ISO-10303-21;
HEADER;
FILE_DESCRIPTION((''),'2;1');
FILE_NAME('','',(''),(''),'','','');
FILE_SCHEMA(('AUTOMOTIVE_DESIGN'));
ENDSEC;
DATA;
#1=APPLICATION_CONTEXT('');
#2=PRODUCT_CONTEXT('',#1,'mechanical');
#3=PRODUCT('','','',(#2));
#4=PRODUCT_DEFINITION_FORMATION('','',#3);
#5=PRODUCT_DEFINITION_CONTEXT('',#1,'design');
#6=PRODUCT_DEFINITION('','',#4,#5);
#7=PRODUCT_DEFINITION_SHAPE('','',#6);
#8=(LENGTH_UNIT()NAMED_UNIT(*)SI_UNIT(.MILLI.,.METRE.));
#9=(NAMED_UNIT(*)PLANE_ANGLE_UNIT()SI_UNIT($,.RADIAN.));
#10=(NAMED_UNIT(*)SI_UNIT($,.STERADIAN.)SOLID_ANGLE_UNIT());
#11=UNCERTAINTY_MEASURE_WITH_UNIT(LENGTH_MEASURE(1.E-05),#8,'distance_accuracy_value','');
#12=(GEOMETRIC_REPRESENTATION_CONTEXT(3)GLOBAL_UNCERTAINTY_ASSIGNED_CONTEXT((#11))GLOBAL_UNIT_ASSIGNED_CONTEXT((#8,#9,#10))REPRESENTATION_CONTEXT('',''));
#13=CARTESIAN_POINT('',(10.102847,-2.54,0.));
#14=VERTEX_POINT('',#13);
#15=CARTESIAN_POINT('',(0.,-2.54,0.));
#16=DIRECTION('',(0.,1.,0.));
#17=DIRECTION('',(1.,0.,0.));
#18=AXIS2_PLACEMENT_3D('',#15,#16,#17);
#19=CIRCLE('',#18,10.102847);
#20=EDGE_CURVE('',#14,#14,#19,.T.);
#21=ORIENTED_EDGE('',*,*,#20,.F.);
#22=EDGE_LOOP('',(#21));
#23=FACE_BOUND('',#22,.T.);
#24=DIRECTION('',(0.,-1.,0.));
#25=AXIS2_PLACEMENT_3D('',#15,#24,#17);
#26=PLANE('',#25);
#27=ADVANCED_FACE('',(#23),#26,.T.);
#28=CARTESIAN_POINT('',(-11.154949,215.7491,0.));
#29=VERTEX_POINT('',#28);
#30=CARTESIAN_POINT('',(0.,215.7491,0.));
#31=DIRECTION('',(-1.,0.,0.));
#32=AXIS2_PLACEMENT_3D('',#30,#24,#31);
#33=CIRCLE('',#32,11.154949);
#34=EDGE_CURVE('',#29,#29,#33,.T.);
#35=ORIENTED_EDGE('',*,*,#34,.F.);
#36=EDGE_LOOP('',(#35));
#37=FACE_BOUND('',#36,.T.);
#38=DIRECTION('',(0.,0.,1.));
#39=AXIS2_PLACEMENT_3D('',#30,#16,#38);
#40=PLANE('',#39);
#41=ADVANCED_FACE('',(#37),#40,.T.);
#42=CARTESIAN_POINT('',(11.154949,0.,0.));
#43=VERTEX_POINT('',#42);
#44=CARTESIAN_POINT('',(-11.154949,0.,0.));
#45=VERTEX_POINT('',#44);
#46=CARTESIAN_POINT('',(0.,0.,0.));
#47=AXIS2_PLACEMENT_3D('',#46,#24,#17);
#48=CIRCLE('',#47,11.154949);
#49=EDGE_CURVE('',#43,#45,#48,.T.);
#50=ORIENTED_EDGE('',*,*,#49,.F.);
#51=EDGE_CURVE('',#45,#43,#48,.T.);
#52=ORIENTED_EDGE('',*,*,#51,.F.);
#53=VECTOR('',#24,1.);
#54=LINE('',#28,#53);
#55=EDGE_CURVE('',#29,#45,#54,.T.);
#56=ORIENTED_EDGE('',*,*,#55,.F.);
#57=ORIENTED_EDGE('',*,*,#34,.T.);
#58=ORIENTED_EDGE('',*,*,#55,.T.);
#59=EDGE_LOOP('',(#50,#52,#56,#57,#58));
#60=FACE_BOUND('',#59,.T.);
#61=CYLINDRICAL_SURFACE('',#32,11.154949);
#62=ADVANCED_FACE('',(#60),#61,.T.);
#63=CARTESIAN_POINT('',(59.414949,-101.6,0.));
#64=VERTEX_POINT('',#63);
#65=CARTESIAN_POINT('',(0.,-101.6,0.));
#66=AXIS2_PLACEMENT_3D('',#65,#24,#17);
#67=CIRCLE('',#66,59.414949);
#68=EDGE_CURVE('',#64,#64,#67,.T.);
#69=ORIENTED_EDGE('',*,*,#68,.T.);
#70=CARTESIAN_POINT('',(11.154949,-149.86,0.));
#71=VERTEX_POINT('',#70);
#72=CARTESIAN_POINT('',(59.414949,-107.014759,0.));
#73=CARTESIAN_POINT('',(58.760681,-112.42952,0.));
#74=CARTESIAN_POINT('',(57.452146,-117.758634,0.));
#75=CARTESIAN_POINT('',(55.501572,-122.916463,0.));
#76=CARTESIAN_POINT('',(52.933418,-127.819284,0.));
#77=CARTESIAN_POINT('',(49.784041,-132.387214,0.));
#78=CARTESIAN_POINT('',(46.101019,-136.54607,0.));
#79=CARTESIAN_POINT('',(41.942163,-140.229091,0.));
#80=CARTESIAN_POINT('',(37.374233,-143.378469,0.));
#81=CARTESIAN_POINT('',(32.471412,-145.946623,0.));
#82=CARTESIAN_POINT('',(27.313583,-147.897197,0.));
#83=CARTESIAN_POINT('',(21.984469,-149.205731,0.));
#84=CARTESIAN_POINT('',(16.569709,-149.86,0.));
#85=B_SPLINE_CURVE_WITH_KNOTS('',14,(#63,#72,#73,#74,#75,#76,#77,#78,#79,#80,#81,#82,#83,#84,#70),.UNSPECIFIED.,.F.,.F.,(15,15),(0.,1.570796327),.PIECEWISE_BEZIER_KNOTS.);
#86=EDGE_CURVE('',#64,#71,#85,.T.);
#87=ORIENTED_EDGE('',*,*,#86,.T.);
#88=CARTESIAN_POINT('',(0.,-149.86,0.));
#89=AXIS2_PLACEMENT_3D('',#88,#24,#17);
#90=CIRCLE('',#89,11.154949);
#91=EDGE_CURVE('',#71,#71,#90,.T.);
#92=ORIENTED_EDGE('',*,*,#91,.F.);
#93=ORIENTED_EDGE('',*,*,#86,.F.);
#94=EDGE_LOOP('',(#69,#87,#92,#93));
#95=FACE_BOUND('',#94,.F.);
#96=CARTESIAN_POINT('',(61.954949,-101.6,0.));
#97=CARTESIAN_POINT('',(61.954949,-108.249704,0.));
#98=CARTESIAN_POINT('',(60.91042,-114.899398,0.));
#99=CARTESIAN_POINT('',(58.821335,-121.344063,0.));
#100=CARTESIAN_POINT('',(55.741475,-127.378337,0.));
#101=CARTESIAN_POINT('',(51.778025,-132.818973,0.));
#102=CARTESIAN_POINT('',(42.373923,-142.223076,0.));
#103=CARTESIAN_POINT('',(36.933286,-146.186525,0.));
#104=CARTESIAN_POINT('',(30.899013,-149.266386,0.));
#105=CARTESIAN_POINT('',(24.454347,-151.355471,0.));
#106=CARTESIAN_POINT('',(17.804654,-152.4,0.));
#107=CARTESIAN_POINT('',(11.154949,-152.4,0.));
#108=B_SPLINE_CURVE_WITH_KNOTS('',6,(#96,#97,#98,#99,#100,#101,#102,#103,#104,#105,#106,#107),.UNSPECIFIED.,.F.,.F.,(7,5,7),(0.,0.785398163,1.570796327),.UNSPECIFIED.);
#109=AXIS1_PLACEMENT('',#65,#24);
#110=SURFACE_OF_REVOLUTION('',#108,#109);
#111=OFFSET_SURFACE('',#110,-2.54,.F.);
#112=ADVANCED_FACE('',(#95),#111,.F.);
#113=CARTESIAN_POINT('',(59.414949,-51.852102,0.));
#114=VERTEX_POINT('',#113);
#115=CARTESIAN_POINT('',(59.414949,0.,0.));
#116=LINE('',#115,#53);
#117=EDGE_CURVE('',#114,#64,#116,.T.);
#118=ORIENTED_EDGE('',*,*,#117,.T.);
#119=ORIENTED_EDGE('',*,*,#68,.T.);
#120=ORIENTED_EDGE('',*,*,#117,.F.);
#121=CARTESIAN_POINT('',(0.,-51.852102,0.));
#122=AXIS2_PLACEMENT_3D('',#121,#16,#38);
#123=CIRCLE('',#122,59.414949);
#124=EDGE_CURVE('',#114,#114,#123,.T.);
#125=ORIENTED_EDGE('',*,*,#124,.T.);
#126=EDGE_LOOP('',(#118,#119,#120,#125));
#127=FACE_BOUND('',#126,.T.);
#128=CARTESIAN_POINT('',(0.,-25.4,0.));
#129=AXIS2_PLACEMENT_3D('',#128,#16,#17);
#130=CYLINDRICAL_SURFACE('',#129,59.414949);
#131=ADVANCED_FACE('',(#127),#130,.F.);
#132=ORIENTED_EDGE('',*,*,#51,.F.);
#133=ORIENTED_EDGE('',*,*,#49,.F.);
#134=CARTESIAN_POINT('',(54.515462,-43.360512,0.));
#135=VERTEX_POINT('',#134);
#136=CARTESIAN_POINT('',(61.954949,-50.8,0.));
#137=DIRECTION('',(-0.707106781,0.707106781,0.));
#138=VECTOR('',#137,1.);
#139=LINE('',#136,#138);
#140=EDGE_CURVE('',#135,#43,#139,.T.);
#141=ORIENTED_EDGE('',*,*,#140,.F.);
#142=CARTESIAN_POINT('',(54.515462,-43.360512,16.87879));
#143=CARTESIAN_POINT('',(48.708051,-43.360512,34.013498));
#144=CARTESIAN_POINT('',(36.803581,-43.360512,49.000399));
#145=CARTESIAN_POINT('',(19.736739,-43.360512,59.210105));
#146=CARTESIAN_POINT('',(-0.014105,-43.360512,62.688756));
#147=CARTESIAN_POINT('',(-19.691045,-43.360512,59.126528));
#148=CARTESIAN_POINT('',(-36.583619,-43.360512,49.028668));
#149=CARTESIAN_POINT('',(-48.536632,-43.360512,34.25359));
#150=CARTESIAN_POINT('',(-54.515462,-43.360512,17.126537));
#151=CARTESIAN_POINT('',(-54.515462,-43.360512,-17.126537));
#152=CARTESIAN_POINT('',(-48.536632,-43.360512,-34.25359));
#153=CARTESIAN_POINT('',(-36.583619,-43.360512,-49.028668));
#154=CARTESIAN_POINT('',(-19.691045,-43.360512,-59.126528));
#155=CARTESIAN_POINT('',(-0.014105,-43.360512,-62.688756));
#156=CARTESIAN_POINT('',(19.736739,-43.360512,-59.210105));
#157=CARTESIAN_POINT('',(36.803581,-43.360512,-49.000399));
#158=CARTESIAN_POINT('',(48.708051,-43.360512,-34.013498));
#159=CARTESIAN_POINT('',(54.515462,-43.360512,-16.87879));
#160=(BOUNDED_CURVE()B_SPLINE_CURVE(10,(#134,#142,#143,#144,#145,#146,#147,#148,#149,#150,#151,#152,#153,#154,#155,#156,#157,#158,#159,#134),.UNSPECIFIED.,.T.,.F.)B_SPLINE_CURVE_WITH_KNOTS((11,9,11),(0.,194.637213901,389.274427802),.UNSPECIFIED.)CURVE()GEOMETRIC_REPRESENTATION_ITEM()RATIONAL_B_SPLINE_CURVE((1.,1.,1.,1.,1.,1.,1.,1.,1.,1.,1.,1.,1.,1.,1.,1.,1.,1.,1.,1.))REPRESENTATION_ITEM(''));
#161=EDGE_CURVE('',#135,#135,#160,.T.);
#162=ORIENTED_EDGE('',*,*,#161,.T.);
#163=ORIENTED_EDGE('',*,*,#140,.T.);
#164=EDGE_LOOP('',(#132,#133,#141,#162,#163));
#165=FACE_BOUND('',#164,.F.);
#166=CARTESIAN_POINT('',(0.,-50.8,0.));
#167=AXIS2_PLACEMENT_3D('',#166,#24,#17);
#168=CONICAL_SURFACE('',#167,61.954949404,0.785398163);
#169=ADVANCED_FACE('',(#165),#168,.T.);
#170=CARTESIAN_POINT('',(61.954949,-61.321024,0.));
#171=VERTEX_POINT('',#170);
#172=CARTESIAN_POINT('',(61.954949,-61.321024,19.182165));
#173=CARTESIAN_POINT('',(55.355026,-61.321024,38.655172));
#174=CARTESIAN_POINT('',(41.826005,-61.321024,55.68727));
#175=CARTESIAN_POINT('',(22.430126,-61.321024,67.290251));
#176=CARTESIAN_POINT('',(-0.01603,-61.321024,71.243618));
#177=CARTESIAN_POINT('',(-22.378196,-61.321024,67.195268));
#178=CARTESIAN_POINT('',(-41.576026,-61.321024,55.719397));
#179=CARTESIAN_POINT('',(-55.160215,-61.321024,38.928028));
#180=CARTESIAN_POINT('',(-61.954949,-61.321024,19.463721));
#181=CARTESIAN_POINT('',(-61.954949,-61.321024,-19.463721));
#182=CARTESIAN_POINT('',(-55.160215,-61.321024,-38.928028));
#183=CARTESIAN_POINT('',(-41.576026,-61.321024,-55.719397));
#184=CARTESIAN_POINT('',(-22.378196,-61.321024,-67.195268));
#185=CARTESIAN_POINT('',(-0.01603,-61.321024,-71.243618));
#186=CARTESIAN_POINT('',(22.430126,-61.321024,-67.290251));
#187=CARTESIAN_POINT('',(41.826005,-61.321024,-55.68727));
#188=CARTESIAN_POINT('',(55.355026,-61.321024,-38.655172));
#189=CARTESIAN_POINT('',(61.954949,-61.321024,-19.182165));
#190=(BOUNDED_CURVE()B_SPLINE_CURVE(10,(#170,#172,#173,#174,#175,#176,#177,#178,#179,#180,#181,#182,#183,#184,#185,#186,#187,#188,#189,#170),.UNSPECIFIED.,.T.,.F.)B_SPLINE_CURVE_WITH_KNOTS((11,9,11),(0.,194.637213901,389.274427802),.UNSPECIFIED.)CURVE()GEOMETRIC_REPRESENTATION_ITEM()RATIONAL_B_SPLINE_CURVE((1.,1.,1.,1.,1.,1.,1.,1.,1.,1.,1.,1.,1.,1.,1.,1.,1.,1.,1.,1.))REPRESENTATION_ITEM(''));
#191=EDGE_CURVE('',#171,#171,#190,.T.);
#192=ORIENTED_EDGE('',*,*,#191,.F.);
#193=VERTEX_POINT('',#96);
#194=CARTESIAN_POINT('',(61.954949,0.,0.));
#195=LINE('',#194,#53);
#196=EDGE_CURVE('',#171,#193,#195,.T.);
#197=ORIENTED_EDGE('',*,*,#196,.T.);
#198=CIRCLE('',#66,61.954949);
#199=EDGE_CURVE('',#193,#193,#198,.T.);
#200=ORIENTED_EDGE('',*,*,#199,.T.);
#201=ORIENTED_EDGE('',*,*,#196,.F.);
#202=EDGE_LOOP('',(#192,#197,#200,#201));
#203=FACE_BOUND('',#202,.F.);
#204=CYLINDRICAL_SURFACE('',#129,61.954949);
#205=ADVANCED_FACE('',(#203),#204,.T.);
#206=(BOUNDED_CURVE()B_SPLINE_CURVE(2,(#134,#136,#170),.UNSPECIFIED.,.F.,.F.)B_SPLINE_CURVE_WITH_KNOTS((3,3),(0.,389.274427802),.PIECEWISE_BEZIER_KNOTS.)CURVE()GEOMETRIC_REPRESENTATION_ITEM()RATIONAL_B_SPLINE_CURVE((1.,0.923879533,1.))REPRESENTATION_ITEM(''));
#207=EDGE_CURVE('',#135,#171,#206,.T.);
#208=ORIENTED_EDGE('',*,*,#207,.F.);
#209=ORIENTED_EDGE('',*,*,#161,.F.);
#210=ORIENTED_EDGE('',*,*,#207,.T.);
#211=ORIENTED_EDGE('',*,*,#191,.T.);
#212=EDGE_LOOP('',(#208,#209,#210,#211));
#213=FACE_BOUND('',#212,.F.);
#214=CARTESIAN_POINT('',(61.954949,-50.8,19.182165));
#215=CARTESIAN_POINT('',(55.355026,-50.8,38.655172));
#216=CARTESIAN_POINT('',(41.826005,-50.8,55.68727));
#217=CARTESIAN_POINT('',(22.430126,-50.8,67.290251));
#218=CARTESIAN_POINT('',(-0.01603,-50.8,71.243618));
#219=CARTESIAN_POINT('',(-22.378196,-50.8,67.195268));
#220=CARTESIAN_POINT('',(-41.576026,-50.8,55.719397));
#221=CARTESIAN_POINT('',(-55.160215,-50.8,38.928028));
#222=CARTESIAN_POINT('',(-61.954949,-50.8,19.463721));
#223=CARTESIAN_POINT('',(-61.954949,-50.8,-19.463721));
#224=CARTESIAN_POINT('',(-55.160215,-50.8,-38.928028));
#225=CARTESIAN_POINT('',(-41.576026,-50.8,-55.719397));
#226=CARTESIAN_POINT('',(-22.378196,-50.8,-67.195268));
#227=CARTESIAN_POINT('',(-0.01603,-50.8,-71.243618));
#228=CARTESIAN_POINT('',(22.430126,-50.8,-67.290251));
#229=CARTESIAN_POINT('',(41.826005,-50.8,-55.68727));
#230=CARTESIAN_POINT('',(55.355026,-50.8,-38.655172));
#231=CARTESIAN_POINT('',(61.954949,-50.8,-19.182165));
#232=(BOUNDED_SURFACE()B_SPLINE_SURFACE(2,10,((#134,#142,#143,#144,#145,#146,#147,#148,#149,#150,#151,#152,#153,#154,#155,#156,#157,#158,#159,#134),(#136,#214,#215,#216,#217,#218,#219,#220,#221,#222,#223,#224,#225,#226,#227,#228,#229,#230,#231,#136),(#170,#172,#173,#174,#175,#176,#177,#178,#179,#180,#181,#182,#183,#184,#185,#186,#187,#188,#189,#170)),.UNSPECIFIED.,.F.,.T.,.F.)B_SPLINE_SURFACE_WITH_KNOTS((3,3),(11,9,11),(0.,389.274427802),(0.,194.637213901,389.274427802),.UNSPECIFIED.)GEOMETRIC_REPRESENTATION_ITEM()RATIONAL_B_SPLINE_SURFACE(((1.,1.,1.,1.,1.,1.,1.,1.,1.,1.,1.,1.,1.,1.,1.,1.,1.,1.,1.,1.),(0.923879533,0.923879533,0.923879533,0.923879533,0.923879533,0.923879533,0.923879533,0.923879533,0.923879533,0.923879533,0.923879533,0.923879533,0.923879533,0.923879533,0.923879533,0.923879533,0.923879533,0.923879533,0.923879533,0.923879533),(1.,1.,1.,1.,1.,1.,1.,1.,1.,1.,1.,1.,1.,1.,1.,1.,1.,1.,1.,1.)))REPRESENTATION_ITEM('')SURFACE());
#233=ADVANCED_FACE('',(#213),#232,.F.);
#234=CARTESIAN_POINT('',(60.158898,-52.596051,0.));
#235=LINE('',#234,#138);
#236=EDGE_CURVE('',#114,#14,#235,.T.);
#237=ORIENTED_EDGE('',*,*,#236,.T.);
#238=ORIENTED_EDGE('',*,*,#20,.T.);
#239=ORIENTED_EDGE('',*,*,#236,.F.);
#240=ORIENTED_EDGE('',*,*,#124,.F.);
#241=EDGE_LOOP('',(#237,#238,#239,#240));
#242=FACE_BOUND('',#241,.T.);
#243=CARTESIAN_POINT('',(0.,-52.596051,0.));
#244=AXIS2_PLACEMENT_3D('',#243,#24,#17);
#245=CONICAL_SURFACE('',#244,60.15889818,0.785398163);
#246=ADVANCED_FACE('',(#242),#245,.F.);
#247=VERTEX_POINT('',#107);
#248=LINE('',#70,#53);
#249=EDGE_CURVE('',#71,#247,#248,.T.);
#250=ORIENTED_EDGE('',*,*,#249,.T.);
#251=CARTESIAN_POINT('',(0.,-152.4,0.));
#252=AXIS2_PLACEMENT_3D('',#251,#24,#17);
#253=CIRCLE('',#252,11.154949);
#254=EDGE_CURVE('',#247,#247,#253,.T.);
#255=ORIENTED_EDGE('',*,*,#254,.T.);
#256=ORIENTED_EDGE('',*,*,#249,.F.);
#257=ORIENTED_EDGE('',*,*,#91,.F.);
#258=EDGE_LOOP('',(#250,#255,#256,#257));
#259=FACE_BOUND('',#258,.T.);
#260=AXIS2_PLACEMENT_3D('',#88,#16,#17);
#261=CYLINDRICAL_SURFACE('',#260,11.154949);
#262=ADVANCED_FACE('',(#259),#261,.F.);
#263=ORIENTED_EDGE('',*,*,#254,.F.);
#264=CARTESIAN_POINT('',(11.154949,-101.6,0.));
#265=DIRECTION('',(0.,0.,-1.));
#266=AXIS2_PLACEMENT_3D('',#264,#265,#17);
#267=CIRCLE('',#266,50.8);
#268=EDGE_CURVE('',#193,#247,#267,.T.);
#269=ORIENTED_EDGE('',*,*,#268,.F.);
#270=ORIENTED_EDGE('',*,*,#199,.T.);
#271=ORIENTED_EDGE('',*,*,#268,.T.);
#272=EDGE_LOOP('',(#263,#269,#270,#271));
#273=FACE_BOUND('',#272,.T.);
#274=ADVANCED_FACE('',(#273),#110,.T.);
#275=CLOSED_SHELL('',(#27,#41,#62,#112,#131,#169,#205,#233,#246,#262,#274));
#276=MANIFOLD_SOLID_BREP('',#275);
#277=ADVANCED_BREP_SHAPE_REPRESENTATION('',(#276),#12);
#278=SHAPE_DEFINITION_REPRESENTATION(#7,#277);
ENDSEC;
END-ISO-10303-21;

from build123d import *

# Parameters (mm, degrees)
F0_R     = 61.9549494039
F1_DEPTH = 25.4
F2_DEPTH = 127
F3_R     = 50.8
F4_SIZE  = 50.8
F5_T     = -2.54
F6_R     = 11.1549494039
F9_R     = 25.4


# Not quite as in the source:
# - a shell that OpenCascade refuses in one call is made with other operations: the cavity is built on its own and cut out


with BuildPart() as f1:
    # F0 (on Front) → F1 (new body)
    with BuildSketch(Plane.XZ):
        Circle(F0_R)
    extrude(amount=F1_DEPTH)

    # F2 (add): a face of the model
    f2_faces = [f1.faces().sort_by_distance(p)[0] for p in [
        (0, -25.4, 0),
    ]]
    extrude(f2_faces, amount=F2_DEPTH)

    # F3
    f3_edges = [f1.edges().sort_by_distance(p)[0] for p in [
        (-61.954949, -152.4, 0),
    ]]
    fillet(f3_edges, radius=F3_R)

    # F4
    f4_edges = [f1.edges().sort_by_distance(p)[0] for p in [
        (-61.954949, 0, 0),
    ]]
    chamfer(f4_edges, length=F4_SIZE)

    # F5: a shell. OpenCascade refuses it in one call, so the cavity is built on its own and cut out:
    # the body offset inwards by the wall thickness, plus a prism from it out through each open face.
    f5_core = offset(f1.part, amount=F5_T, mode=Mode.PRIVATE)
    f5_exits = [f5_core.faces().sort_by_distance(p)[0] for p in [
        (0, -149.86, 0),
    ]]
    add(f5_core, mode=Mode.SUBTRACT)
    extrude(f5_exits, amount=-F5_T, mode=Mode.SUBTRACT)

    # F8: sweep along a path in F7
    with BuildLine(Plane.YZ) as f8_path:
        Line((215.7490998507, 0), (0, 0))
    # F6 (on face) → F8 (sweep)
    with BuildSketch(Plane(origin=(0, 0, 0), x_dir=(-1, 0, 0), z_dir=(0, 1, 0))):
        Circle(F6_R)
    sweep(path=f8_path.line)

    # F9
    f9_edges = [f1.edges().sort_by_distance(p)[0] for p in [
        (-61.954949, -50.8, 0),
    ]]
    fillet(f9_edges, radius=F9_R)


solid = f1.part
